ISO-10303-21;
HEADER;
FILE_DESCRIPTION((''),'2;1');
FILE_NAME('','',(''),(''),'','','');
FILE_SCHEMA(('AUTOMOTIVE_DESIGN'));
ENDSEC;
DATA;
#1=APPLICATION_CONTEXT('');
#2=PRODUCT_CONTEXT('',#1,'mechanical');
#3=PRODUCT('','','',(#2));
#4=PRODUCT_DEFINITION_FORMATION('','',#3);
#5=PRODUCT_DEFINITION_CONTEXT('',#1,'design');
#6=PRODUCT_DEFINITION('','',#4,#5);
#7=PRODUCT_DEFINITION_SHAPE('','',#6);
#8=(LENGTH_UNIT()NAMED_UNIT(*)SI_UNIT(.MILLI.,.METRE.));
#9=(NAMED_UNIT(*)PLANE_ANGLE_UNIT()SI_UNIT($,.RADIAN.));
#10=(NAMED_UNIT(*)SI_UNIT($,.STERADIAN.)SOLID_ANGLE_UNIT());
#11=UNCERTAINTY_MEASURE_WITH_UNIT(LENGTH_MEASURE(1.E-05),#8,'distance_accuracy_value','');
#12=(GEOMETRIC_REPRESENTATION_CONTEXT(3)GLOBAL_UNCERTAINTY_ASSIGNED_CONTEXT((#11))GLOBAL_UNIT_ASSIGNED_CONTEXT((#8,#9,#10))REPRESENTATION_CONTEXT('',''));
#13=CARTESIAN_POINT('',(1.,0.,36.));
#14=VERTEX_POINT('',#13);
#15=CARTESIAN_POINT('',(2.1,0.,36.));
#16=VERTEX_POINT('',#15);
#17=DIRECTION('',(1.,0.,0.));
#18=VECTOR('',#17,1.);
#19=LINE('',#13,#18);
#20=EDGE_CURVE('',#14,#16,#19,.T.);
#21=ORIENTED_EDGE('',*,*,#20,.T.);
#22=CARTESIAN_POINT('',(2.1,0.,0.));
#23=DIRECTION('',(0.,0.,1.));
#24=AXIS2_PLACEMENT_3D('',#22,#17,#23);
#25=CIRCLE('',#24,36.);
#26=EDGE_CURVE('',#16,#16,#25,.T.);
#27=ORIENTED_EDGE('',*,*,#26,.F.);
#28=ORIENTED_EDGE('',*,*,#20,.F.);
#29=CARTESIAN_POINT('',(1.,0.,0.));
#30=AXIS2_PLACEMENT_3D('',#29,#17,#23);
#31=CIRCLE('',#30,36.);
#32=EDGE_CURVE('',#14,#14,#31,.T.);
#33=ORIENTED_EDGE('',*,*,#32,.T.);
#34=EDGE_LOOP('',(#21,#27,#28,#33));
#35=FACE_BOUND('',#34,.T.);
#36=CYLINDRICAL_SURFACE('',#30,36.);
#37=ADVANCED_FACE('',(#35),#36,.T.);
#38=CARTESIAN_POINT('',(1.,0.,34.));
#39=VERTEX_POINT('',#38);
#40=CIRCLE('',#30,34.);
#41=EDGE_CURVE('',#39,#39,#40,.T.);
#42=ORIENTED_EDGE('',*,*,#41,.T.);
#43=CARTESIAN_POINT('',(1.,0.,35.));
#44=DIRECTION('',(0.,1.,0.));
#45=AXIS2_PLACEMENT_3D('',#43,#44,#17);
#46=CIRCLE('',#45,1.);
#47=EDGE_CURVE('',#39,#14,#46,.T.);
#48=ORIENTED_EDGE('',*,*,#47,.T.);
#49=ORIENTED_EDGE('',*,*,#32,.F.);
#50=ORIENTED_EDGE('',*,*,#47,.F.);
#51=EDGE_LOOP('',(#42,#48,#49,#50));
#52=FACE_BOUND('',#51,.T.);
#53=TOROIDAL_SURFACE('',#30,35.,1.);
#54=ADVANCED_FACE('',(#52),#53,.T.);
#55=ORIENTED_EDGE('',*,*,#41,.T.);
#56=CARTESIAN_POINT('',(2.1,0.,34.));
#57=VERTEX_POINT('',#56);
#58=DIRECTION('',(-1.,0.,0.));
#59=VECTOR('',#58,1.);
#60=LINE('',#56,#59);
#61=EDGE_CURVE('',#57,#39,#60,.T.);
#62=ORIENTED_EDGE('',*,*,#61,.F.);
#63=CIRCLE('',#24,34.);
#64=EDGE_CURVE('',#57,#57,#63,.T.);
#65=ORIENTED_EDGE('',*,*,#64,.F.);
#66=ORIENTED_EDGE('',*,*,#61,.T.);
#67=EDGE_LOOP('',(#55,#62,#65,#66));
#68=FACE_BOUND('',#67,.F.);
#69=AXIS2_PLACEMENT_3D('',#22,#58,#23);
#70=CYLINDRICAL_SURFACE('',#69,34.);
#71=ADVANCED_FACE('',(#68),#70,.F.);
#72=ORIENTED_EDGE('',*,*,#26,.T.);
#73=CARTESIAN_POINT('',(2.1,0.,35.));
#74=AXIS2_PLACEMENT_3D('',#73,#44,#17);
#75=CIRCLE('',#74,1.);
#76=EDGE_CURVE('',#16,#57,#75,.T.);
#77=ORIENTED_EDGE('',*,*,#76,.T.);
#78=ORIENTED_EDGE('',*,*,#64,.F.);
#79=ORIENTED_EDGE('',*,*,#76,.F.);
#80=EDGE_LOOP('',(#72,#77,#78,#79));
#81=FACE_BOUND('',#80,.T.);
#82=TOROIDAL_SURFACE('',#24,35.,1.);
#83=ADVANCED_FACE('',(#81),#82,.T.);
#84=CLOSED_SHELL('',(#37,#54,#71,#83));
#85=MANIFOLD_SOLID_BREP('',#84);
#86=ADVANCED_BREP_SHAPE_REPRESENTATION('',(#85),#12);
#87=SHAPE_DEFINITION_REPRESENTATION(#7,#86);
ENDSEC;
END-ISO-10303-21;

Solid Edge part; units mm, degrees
sketch "Sketch1" plane through (0, 0, 0) normal (0, -1, 0) x (1, 0, 0)
  line L0 (1, 36) -> (2.1, 36)
  line L1 (2.1, 34) -> (1, 34)
  arc A0 (2.1, 36) -> (2.1, 34) centre (2.1, 35) cw
  arc A1 (1, 34) -> (1, 36) centre (1, 35) cw
revolve "RevolvedProtrusion1" add sketch "Sketch1" angle 360 about axis through (0, 0, 0) along (1, 0, 0)
